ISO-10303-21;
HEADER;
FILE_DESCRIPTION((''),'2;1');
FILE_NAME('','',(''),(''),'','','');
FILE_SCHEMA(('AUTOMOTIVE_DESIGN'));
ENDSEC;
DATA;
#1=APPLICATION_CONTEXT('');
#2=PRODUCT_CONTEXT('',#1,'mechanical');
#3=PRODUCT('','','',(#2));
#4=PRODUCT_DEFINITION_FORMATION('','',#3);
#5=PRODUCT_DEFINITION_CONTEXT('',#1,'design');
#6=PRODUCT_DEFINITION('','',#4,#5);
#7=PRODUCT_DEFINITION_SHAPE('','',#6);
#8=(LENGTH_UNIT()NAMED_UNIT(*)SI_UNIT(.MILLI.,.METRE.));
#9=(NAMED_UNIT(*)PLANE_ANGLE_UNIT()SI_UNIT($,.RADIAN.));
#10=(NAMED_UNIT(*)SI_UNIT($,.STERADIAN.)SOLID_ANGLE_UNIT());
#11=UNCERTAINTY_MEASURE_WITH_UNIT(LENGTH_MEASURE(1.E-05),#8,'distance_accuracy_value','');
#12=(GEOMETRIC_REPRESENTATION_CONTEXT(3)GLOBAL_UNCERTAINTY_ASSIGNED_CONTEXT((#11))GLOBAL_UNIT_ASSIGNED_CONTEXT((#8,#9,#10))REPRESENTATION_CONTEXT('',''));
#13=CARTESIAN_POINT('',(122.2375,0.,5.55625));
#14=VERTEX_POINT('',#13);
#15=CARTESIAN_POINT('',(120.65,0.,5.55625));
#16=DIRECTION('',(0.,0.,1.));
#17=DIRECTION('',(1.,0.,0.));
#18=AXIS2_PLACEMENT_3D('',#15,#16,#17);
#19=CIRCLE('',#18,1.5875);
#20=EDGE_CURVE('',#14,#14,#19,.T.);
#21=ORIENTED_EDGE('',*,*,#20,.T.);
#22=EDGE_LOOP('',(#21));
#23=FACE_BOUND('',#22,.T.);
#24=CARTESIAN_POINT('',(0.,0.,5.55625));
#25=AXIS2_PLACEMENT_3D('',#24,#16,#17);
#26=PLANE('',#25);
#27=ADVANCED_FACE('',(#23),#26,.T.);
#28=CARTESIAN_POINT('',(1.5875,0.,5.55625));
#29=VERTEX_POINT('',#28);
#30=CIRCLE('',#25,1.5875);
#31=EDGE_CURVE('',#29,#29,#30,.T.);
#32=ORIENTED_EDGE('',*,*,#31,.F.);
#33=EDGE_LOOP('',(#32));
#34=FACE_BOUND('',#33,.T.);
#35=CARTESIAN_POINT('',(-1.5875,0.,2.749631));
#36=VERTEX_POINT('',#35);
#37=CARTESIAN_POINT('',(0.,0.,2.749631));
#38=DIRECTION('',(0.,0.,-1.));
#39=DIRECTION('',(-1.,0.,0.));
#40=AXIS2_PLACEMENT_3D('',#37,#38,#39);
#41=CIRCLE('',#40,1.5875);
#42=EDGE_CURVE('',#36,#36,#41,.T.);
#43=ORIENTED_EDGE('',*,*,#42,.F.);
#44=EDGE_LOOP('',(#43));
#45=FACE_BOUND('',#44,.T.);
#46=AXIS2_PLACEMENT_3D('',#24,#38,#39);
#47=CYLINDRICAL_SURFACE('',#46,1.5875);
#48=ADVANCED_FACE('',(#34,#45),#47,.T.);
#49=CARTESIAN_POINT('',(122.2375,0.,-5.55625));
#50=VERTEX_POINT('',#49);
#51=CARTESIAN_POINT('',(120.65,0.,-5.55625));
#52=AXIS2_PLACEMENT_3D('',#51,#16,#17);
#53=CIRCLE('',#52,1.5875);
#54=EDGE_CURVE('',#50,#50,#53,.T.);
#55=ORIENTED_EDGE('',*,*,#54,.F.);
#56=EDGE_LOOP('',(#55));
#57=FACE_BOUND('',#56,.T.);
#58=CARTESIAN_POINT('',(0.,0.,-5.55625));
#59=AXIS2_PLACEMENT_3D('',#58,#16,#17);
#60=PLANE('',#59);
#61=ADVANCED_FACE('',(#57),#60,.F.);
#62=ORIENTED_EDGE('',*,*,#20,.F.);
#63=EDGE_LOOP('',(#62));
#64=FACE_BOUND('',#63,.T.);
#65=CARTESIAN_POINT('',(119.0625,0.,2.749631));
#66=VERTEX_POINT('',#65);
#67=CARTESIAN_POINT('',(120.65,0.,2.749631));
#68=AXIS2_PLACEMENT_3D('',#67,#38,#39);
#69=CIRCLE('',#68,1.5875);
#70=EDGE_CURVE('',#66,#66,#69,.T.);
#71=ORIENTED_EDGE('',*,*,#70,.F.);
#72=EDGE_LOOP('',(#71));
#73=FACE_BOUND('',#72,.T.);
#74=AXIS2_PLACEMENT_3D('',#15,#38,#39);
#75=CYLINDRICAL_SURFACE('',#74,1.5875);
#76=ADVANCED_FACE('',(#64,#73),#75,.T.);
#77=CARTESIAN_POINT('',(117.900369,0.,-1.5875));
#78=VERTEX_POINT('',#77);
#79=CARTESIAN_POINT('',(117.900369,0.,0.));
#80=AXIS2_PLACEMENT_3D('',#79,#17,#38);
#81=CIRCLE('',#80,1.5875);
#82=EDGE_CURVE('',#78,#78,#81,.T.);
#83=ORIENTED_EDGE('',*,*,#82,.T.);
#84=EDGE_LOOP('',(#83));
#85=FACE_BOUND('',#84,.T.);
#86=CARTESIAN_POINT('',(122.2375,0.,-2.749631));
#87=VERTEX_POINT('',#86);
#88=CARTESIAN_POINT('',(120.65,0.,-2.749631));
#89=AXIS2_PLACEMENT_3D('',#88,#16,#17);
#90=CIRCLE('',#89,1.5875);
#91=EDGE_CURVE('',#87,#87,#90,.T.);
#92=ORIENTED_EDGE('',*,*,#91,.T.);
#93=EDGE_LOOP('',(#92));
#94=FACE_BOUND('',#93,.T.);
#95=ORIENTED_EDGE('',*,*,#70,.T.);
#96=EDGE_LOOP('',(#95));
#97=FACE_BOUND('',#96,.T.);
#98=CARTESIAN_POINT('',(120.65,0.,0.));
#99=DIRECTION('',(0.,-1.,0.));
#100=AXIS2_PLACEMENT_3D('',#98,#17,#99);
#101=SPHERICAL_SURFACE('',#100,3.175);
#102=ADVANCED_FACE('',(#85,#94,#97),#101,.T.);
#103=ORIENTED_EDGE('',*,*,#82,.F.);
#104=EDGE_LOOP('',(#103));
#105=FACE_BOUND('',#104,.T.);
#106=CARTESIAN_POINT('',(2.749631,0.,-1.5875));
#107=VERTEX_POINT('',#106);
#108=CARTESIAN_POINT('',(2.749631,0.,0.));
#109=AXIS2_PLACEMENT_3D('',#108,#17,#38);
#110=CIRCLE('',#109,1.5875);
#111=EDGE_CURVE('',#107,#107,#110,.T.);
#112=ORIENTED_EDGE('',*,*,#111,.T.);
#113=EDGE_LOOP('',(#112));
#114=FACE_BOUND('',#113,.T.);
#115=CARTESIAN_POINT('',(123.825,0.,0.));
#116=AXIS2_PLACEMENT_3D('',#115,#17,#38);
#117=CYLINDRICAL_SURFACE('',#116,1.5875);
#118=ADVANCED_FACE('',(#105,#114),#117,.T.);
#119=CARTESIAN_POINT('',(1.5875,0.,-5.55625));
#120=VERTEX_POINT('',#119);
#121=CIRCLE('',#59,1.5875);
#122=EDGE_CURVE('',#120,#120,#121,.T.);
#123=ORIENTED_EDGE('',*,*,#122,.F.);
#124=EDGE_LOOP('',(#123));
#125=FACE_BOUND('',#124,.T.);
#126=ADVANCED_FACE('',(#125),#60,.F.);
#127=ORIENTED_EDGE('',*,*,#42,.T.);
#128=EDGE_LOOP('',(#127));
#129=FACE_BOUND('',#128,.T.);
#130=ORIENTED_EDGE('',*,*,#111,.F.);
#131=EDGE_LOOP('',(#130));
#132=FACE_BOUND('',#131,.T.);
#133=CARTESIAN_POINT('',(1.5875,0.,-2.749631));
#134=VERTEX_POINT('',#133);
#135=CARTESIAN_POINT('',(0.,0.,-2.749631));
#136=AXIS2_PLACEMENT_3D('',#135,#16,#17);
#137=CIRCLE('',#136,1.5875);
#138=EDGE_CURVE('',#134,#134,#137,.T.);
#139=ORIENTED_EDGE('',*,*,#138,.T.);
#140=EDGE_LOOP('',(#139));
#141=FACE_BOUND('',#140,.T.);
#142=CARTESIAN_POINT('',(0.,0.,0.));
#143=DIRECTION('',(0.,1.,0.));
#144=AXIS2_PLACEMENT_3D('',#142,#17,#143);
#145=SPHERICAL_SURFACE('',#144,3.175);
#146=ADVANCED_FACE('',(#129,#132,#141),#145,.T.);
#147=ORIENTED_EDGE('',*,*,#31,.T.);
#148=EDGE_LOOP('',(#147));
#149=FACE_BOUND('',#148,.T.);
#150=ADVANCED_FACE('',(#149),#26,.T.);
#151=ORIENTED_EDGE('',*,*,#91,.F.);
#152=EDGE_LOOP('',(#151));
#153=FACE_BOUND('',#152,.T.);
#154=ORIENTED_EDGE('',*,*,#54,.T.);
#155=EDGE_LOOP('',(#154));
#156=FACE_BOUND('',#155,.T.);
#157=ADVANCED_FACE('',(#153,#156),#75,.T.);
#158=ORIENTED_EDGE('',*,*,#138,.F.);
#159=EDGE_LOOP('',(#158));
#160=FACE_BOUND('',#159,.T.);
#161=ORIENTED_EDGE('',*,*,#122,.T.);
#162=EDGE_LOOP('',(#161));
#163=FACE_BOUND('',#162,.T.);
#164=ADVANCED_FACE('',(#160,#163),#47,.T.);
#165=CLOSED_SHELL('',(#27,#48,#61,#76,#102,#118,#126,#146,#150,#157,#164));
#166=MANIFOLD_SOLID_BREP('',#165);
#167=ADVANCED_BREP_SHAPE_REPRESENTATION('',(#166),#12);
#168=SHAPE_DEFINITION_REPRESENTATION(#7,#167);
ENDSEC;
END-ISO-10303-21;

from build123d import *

# Parameters (mm, degrees)
SKETCH1_3_R         = 1.5875
BOSS_EXTRUDE1_DEPTH = 5.55625


with BuildPart() as part:
    # Sketch1 → Revolve1 (revolve)
    with BuildSketch(Plane.XY):
        with BuildLine():
            Line((117.900369343, 1.5875), (2.749630657, 1.5875))
            ThreePointArc((2.749630657, 1.5875), (-0.821750468, 3.066814498), (-3.175, 0))
            Line((-3.175, 0), (123.825, 0))
            ThreePointArc((123.825, 0), (121.471750468, 3.066814498), (117.900369343, 1.5875))
        make_face()
    revolve(axis=Axis((123.825, 0, 0), (-1, 0, 0)))

    # Sketch1<3> → Boss-Extrude1 (add, symmetric)
    with BuildSketch(Plane.XY):
        Circle(SKETCH1_3_R)
        with Locations((120.65, 0)):
            Circle(SKETCH1_3_R)
    extrude(amount=BOSS_EXTRUDE1_DEPTH, both=True)


solid = part.part
